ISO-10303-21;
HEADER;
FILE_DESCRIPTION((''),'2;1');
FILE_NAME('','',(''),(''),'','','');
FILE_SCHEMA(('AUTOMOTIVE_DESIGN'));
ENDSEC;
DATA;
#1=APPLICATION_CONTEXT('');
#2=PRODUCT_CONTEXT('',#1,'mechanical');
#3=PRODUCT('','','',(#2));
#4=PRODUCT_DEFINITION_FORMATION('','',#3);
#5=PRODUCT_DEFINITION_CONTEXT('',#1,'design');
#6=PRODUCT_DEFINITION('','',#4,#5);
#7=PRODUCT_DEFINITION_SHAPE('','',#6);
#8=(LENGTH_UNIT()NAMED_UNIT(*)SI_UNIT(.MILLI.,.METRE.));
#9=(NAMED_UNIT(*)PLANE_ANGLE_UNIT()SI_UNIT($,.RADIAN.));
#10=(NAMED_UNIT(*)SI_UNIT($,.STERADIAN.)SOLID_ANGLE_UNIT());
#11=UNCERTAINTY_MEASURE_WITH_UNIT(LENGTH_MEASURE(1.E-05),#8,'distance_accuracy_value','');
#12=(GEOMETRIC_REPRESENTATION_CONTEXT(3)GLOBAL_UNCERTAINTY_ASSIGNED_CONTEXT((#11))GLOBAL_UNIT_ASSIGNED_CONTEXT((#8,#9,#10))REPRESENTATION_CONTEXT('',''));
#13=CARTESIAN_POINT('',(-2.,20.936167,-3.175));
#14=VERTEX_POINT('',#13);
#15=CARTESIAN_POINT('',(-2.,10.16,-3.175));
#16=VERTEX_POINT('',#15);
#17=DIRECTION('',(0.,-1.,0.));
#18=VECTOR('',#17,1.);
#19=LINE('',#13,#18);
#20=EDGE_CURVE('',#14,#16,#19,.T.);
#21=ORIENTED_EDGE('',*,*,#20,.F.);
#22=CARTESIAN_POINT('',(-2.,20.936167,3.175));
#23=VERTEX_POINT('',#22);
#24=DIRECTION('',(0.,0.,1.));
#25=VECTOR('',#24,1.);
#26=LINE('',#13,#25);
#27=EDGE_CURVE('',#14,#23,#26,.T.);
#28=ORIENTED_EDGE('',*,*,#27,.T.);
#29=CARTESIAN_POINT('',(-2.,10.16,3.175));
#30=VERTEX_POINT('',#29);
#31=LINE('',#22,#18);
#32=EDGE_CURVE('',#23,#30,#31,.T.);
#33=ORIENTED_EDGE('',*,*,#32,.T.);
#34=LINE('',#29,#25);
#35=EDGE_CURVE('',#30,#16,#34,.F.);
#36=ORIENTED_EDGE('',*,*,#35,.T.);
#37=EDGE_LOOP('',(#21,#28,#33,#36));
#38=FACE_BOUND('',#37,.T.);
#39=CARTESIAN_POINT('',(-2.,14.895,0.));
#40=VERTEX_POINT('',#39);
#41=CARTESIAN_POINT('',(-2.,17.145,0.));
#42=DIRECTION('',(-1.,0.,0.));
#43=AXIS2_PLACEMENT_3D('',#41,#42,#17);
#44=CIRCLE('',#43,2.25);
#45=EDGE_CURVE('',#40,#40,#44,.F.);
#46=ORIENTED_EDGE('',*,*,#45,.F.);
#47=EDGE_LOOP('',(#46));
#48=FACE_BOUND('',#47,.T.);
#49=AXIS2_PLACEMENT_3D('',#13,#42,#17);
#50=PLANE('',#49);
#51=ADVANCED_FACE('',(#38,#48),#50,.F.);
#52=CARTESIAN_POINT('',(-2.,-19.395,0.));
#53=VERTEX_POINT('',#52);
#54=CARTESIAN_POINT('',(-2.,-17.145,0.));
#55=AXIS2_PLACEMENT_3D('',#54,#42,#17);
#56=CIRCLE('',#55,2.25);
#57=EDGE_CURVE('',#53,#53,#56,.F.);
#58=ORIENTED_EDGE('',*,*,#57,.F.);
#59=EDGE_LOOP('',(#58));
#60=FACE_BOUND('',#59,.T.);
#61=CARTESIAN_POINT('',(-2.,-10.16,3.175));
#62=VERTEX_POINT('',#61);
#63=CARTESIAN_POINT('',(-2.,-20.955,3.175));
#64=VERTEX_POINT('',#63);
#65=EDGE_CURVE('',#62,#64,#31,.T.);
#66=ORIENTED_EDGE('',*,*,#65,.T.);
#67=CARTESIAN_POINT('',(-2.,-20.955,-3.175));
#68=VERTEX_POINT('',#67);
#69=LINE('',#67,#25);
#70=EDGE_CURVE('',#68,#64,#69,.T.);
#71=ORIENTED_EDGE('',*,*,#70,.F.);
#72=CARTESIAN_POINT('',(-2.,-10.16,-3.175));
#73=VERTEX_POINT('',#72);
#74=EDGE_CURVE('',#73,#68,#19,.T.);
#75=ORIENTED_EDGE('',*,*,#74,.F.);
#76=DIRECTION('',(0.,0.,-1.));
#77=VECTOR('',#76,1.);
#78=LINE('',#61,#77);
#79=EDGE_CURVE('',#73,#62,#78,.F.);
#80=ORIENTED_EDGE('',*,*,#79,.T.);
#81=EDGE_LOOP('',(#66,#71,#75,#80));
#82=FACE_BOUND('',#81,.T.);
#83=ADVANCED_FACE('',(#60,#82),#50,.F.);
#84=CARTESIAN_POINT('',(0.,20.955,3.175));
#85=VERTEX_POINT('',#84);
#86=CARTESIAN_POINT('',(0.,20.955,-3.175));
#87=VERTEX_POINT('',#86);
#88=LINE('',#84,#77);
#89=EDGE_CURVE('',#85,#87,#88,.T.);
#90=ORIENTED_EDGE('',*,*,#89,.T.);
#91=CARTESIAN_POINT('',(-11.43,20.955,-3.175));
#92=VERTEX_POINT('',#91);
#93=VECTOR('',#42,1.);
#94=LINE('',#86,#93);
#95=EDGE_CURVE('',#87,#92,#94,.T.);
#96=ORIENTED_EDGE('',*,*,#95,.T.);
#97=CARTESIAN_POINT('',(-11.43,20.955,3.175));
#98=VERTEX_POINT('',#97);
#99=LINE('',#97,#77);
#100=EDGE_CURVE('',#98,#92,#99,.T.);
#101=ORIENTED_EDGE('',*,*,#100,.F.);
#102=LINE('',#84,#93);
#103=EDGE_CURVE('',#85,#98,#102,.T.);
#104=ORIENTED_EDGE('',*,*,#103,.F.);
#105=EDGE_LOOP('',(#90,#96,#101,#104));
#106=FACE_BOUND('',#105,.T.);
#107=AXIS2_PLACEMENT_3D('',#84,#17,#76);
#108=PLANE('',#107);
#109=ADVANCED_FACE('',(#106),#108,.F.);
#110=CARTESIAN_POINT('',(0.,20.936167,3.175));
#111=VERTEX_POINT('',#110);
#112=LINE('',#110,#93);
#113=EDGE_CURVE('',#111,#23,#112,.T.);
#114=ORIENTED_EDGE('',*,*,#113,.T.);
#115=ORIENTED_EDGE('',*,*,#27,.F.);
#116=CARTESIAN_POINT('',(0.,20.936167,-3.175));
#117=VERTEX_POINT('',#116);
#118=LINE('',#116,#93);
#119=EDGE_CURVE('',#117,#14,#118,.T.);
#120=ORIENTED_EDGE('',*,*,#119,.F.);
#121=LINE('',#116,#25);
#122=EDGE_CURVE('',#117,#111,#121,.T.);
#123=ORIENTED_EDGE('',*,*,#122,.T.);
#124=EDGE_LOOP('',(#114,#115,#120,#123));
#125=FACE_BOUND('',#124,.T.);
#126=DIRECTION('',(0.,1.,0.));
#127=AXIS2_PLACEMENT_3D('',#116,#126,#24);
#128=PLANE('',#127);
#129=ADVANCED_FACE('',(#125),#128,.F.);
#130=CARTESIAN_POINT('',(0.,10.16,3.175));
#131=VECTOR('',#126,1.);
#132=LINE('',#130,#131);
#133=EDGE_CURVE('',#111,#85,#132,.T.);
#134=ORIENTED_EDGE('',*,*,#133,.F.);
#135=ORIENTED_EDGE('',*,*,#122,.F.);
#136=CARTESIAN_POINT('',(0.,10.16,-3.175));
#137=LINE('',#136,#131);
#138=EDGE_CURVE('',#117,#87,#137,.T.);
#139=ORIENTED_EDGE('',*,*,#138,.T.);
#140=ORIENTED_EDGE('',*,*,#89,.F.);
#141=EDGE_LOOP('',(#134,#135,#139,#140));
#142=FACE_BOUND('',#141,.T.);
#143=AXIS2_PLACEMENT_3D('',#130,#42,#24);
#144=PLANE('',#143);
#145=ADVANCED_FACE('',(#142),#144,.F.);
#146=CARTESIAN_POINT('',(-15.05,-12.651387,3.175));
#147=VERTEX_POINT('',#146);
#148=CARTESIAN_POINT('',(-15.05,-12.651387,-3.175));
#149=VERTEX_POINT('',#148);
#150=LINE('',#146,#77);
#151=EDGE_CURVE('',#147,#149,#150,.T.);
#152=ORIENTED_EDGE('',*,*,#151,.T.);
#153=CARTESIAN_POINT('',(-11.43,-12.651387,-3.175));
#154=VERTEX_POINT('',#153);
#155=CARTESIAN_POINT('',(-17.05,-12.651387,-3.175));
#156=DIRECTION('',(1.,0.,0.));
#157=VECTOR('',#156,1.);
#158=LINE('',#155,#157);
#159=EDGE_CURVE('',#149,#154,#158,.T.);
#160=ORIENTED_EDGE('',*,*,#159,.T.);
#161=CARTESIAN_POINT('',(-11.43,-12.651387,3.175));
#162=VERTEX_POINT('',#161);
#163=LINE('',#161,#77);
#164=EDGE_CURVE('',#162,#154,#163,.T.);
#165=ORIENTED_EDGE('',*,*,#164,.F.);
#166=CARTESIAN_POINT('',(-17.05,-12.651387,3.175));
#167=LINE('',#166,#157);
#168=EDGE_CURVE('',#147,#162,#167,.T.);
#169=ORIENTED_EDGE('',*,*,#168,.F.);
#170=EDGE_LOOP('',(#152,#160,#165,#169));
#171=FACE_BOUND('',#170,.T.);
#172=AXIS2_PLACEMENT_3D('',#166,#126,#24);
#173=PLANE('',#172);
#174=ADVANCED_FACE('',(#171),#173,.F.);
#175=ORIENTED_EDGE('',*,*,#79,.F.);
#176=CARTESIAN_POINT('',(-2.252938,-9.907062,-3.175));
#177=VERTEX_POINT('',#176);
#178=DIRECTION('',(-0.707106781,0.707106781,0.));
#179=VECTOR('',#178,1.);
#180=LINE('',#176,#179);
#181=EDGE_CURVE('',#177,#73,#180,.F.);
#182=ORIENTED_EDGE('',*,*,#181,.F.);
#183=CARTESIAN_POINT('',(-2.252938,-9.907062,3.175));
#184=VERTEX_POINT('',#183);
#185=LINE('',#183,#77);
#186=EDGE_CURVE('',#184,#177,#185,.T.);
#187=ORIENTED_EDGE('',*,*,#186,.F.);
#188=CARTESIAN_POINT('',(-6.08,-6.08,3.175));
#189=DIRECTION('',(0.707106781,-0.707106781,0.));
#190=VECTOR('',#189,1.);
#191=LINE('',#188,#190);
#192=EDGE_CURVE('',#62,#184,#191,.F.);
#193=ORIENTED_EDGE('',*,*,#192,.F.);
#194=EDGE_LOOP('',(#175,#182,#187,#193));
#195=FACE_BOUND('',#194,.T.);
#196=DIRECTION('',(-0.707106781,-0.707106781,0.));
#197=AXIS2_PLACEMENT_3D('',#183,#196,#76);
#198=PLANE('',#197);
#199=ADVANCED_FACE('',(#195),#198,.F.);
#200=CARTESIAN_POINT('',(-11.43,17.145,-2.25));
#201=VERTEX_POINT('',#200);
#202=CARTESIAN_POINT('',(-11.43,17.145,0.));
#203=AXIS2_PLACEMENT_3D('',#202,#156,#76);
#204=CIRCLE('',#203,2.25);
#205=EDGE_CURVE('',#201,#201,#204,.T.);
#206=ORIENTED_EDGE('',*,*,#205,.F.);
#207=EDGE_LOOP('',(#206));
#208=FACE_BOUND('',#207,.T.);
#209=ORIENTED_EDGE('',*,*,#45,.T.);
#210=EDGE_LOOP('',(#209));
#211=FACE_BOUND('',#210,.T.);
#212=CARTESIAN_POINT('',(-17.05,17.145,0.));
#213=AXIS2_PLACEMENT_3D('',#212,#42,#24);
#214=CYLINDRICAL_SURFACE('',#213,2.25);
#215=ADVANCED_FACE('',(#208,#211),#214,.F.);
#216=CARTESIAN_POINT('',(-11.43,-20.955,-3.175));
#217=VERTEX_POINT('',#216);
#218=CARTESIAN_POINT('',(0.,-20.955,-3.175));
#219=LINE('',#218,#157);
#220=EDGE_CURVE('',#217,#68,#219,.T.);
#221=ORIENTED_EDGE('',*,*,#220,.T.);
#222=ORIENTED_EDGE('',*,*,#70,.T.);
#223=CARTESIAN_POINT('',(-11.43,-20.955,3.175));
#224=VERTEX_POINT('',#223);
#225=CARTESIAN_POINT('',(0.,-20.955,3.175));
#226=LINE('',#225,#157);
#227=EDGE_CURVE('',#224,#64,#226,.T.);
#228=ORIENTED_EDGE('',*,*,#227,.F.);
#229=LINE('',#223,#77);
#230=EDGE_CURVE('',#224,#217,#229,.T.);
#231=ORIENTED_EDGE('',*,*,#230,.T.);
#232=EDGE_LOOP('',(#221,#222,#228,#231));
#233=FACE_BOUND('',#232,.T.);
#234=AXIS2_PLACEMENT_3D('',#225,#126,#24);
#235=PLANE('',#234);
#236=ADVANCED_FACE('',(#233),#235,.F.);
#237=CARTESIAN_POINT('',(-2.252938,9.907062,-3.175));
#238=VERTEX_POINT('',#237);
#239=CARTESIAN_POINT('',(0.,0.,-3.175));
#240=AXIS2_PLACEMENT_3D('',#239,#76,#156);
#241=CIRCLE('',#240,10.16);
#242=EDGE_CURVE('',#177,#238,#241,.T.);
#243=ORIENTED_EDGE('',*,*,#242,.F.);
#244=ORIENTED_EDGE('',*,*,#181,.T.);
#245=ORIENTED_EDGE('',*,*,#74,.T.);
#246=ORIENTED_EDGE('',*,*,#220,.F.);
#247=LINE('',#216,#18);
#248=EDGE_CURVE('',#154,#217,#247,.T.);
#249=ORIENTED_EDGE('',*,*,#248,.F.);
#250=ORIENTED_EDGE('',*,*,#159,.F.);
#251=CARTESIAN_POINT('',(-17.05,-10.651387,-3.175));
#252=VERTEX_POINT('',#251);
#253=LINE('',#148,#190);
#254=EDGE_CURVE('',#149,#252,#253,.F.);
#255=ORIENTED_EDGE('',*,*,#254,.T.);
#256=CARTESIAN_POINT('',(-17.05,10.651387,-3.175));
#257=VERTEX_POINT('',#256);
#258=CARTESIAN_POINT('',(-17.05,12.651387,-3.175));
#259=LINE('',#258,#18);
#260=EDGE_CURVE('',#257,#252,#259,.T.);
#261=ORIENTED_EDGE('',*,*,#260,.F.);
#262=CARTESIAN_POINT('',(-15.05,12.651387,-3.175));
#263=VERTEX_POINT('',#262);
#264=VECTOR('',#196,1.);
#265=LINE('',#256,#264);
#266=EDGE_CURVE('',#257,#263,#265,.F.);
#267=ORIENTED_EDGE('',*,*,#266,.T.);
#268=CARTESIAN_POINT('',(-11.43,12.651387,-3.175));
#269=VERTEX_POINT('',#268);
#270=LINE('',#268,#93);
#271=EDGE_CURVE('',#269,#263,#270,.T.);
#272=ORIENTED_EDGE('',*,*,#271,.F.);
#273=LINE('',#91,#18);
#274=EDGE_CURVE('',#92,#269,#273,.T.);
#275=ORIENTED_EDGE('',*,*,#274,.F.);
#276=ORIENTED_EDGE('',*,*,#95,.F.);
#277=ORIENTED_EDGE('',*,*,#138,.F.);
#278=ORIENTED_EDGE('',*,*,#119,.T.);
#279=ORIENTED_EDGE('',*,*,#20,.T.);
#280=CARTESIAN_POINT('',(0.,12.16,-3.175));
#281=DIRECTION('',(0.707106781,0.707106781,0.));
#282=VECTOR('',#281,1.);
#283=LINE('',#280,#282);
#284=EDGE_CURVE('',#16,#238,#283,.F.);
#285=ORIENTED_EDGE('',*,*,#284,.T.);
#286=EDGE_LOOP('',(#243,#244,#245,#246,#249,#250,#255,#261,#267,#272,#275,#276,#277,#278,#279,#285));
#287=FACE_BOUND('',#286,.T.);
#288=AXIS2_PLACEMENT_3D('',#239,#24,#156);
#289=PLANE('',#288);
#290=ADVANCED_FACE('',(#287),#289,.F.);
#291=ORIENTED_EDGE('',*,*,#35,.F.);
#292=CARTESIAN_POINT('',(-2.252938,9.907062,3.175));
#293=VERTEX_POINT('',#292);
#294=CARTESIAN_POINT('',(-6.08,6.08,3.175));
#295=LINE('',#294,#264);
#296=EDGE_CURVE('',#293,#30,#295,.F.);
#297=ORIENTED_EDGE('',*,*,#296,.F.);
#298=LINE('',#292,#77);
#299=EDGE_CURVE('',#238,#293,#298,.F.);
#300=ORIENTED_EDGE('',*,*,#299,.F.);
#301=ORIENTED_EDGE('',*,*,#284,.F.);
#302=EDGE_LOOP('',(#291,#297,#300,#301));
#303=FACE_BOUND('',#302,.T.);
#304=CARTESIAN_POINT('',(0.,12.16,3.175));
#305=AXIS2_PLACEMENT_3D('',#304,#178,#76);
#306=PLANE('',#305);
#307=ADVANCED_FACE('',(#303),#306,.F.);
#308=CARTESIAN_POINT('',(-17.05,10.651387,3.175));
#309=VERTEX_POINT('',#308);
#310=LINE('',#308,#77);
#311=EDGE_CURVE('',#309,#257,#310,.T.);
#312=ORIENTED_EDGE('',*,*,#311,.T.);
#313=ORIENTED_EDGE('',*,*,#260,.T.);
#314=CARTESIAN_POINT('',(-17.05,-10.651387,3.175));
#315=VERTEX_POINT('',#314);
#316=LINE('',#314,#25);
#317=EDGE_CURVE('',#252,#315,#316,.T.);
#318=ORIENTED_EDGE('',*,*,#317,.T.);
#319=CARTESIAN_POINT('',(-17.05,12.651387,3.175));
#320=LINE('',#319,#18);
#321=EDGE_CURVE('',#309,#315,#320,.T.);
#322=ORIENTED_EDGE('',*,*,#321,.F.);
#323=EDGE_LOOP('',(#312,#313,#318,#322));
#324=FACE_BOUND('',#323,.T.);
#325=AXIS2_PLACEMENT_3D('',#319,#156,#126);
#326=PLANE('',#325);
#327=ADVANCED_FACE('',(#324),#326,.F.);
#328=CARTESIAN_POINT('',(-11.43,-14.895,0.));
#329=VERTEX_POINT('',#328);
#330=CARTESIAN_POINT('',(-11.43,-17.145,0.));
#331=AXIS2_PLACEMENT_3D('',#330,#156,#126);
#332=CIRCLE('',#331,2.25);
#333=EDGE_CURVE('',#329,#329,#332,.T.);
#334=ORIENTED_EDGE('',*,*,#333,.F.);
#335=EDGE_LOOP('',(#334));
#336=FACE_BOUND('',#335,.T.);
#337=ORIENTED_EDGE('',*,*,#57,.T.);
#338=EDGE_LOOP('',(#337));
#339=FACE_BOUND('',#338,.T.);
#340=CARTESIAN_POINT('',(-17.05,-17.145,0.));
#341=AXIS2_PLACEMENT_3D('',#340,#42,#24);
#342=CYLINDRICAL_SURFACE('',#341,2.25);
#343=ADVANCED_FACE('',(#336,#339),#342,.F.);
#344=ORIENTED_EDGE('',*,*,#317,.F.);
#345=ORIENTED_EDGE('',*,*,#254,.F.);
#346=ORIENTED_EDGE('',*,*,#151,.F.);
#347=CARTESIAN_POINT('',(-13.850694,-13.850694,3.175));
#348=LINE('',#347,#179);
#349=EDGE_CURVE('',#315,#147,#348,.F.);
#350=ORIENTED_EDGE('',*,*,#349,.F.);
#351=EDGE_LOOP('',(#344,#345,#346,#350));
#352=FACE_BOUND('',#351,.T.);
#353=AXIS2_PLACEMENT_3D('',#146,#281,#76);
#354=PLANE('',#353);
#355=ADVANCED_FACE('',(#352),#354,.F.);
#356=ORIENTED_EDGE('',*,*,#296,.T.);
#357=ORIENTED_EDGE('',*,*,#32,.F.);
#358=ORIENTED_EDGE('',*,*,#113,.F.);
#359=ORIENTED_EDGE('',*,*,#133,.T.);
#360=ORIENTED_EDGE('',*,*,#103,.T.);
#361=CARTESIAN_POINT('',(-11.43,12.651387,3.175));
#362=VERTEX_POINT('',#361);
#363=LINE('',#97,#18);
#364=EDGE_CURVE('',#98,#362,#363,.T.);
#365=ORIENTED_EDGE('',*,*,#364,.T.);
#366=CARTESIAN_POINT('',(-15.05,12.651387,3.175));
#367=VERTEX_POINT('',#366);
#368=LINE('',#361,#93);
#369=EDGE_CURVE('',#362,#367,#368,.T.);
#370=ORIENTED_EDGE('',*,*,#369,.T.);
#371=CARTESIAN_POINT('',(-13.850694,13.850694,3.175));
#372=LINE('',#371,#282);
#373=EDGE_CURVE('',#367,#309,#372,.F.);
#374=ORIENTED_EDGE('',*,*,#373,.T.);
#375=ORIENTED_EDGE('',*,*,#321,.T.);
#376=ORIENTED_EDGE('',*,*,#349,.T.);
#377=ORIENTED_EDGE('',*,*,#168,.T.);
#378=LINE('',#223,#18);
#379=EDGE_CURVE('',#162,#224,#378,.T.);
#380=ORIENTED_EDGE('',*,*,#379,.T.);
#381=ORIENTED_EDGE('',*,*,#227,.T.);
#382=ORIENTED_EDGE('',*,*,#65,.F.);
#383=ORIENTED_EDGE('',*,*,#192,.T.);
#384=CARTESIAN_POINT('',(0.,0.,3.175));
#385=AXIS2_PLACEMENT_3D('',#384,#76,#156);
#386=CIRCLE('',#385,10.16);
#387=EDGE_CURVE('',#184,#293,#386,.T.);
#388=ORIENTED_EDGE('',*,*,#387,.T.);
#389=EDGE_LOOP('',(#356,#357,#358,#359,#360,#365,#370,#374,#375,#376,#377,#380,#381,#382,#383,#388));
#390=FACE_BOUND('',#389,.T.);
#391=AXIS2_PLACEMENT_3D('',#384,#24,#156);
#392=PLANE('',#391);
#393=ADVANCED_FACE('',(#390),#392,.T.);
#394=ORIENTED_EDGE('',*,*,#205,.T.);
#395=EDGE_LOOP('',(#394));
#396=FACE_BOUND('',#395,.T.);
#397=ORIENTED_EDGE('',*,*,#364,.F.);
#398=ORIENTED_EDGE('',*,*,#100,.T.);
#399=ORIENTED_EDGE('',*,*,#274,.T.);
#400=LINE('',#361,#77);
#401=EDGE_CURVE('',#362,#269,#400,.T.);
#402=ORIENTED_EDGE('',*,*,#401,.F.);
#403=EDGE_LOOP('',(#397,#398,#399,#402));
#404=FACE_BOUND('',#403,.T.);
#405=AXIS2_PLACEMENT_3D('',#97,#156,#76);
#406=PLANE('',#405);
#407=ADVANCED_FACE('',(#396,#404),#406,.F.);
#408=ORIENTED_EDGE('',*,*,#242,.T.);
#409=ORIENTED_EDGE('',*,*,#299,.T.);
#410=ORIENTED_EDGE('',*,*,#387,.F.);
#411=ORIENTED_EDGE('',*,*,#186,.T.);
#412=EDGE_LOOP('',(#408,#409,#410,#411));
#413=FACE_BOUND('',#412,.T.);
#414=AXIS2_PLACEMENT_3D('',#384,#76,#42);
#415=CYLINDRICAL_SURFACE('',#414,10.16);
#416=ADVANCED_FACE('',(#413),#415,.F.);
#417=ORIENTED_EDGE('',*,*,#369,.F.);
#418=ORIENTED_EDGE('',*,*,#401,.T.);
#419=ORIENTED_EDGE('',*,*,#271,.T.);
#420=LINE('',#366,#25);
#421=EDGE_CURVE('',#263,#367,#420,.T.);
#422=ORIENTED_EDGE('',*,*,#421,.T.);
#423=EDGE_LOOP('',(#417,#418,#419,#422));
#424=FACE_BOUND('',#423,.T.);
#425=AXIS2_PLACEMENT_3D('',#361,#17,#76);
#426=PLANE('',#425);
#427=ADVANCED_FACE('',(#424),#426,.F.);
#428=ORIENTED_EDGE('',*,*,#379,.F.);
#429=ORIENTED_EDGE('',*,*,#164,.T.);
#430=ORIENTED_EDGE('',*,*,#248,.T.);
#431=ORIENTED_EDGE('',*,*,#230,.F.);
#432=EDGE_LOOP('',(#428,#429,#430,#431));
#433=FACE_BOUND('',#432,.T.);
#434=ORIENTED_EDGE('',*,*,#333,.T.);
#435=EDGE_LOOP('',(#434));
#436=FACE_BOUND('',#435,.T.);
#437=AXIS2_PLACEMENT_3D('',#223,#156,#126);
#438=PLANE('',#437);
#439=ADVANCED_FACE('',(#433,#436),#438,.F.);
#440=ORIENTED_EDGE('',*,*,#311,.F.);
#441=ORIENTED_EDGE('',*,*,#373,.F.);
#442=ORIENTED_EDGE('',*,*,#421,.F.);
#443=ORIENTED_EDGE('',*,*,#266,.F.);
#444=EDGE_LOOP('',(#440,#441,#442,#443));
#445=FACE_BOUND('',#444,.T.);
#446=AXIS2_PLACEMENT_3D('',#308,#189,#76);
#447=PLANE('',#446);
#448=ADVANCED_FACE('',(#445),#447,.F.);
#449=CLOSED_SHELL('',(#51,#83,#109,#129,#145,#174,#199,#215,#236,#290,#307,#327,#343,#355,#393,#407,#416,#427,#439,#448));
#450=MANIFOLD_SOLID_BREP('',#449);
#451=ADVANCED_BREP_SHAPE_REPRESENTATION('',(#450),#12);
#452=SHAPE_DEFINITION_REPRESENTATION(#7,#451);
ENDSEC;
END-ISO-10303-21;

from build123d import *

# Parameters (mm, degrees)
BOSS_EXTRUDE2_DEPTH  = 3.175
CHAMFER2_SIZE        = 2
M4_CLEARANCE_HOLE1_D = 4.5
CHAMFER1_SIZE        = 2
SKETCH6_W            = 2
SKETCH6_H            = 41.891167458
CUT_EXTRUDE1_DEPTH   = 28.75134276


with BuildPart() as part:
    # Sketch1 → Boss-Extrude2 (new, symmetric)
    with BuildSketch(Plane.XY):
        with BuildLine():
            Line((0, 10.16), (0, 20.955))
            Line((0, 20.955), (-11.43, 20.955))
            Line((-11.43, 20.955), (-11.43, 12.651387276))
            Line((-11.43, 12.651387276), (-17.05, 12.651387276))
            Line((-17.05, 12.651387276), (-17.05, -12.651387276))
            Line((-17.05, -12.651387276), (-11.43, -12.651387276))
            Line((-11.43, -12.651387276), (-11.43, -20.955))
            Line((-11.43, -20.955), (0, -20.955))
            Line((0, -20.955), (0, -10.16))
            ThreePointArc((0, -10.16), (-10.16, 0), (0, 10.16))
        make_face()
    extrude(amount=BOSS_EXTRUDE2_DEPTH, both=True)

    # Chamfer2
    chamfer2_edges = [part.edges().sort_by_distance(p)[0] for p in [
        (-17.05, -12.651387276, 0),
        (-17.05, 12.651387276, 0),
    ]]
    chamfer(chamfer2_edges, length=CHAMFER2_SIZE)

    # M4 Clearance Hole1 (through all)
    with Locations(Plane.ZY.offset(17.05)):
        with Locations((0, 17.145), (0, -17.145)):
            Hole(M4_CLEARANCE_HOLE1_D / 2)

    # Chamfer1
    # the kernel refuses this chamfer: 2 mm, written as the material it takes off along each edge
    with BuildSketch(Plane(origin=(0, -10.16, 9.000384751), x_dir=(-0.9937566306409056, 0.1115695256655456, 0), z_dir=(0, 0, -1))) as chamfer1_piece_1:
        with BuildLine():
            Line((2.267092762, 0), (-CHAMFER1_SIZE * 0.111569525666, -CHAMFER1_SIZE * 0.993756630641))
            Line((-CHAMFER1_SIZE * 0.111569525666, -CHAMFER1_SIZE * 0.993756630641), (0, 0))
            ThreePointArc((0, 0), (1.165083929, -0.063383685), (2.267092762, 0))
        make_face()
    extrude(amount=18.000769503, mode=Mode.SUBTRACT)
    with BuildSketch(Plane(origin=(0, 10.16, 9.000384751), x_dir=(0, 1, 0), z_dir=(0, 0, -1))) as chamfer1_piece_2:
        with BuildLine():
            Line((CHAMFER1_SIZE, 0), (-0.252938464, -2.252938464))
            ThreePointArc((-0.252938464, -2.252938464), (-0.066999904, -1.164881567), (0, 0))
            Line((0, 0), (CHAMFER1_SIZE, 0))
        make_face()
    extrude(amount=18.000769503, mode=Mode.SUBTRACT)

    # Sketch6 → Cut-Extrude1 (cut, through all)
    with BuildSketch(Plane.XY.offset(3.175)):
        with Locations((-1, -0.009416271)):
            Rectangle(SKETCH6_W, SKETCH6_H)
    extrude(amount=-CUT_EXTRUDE1_DEPTH, mode=Mode.SUBTRACT)


solid = part.part
